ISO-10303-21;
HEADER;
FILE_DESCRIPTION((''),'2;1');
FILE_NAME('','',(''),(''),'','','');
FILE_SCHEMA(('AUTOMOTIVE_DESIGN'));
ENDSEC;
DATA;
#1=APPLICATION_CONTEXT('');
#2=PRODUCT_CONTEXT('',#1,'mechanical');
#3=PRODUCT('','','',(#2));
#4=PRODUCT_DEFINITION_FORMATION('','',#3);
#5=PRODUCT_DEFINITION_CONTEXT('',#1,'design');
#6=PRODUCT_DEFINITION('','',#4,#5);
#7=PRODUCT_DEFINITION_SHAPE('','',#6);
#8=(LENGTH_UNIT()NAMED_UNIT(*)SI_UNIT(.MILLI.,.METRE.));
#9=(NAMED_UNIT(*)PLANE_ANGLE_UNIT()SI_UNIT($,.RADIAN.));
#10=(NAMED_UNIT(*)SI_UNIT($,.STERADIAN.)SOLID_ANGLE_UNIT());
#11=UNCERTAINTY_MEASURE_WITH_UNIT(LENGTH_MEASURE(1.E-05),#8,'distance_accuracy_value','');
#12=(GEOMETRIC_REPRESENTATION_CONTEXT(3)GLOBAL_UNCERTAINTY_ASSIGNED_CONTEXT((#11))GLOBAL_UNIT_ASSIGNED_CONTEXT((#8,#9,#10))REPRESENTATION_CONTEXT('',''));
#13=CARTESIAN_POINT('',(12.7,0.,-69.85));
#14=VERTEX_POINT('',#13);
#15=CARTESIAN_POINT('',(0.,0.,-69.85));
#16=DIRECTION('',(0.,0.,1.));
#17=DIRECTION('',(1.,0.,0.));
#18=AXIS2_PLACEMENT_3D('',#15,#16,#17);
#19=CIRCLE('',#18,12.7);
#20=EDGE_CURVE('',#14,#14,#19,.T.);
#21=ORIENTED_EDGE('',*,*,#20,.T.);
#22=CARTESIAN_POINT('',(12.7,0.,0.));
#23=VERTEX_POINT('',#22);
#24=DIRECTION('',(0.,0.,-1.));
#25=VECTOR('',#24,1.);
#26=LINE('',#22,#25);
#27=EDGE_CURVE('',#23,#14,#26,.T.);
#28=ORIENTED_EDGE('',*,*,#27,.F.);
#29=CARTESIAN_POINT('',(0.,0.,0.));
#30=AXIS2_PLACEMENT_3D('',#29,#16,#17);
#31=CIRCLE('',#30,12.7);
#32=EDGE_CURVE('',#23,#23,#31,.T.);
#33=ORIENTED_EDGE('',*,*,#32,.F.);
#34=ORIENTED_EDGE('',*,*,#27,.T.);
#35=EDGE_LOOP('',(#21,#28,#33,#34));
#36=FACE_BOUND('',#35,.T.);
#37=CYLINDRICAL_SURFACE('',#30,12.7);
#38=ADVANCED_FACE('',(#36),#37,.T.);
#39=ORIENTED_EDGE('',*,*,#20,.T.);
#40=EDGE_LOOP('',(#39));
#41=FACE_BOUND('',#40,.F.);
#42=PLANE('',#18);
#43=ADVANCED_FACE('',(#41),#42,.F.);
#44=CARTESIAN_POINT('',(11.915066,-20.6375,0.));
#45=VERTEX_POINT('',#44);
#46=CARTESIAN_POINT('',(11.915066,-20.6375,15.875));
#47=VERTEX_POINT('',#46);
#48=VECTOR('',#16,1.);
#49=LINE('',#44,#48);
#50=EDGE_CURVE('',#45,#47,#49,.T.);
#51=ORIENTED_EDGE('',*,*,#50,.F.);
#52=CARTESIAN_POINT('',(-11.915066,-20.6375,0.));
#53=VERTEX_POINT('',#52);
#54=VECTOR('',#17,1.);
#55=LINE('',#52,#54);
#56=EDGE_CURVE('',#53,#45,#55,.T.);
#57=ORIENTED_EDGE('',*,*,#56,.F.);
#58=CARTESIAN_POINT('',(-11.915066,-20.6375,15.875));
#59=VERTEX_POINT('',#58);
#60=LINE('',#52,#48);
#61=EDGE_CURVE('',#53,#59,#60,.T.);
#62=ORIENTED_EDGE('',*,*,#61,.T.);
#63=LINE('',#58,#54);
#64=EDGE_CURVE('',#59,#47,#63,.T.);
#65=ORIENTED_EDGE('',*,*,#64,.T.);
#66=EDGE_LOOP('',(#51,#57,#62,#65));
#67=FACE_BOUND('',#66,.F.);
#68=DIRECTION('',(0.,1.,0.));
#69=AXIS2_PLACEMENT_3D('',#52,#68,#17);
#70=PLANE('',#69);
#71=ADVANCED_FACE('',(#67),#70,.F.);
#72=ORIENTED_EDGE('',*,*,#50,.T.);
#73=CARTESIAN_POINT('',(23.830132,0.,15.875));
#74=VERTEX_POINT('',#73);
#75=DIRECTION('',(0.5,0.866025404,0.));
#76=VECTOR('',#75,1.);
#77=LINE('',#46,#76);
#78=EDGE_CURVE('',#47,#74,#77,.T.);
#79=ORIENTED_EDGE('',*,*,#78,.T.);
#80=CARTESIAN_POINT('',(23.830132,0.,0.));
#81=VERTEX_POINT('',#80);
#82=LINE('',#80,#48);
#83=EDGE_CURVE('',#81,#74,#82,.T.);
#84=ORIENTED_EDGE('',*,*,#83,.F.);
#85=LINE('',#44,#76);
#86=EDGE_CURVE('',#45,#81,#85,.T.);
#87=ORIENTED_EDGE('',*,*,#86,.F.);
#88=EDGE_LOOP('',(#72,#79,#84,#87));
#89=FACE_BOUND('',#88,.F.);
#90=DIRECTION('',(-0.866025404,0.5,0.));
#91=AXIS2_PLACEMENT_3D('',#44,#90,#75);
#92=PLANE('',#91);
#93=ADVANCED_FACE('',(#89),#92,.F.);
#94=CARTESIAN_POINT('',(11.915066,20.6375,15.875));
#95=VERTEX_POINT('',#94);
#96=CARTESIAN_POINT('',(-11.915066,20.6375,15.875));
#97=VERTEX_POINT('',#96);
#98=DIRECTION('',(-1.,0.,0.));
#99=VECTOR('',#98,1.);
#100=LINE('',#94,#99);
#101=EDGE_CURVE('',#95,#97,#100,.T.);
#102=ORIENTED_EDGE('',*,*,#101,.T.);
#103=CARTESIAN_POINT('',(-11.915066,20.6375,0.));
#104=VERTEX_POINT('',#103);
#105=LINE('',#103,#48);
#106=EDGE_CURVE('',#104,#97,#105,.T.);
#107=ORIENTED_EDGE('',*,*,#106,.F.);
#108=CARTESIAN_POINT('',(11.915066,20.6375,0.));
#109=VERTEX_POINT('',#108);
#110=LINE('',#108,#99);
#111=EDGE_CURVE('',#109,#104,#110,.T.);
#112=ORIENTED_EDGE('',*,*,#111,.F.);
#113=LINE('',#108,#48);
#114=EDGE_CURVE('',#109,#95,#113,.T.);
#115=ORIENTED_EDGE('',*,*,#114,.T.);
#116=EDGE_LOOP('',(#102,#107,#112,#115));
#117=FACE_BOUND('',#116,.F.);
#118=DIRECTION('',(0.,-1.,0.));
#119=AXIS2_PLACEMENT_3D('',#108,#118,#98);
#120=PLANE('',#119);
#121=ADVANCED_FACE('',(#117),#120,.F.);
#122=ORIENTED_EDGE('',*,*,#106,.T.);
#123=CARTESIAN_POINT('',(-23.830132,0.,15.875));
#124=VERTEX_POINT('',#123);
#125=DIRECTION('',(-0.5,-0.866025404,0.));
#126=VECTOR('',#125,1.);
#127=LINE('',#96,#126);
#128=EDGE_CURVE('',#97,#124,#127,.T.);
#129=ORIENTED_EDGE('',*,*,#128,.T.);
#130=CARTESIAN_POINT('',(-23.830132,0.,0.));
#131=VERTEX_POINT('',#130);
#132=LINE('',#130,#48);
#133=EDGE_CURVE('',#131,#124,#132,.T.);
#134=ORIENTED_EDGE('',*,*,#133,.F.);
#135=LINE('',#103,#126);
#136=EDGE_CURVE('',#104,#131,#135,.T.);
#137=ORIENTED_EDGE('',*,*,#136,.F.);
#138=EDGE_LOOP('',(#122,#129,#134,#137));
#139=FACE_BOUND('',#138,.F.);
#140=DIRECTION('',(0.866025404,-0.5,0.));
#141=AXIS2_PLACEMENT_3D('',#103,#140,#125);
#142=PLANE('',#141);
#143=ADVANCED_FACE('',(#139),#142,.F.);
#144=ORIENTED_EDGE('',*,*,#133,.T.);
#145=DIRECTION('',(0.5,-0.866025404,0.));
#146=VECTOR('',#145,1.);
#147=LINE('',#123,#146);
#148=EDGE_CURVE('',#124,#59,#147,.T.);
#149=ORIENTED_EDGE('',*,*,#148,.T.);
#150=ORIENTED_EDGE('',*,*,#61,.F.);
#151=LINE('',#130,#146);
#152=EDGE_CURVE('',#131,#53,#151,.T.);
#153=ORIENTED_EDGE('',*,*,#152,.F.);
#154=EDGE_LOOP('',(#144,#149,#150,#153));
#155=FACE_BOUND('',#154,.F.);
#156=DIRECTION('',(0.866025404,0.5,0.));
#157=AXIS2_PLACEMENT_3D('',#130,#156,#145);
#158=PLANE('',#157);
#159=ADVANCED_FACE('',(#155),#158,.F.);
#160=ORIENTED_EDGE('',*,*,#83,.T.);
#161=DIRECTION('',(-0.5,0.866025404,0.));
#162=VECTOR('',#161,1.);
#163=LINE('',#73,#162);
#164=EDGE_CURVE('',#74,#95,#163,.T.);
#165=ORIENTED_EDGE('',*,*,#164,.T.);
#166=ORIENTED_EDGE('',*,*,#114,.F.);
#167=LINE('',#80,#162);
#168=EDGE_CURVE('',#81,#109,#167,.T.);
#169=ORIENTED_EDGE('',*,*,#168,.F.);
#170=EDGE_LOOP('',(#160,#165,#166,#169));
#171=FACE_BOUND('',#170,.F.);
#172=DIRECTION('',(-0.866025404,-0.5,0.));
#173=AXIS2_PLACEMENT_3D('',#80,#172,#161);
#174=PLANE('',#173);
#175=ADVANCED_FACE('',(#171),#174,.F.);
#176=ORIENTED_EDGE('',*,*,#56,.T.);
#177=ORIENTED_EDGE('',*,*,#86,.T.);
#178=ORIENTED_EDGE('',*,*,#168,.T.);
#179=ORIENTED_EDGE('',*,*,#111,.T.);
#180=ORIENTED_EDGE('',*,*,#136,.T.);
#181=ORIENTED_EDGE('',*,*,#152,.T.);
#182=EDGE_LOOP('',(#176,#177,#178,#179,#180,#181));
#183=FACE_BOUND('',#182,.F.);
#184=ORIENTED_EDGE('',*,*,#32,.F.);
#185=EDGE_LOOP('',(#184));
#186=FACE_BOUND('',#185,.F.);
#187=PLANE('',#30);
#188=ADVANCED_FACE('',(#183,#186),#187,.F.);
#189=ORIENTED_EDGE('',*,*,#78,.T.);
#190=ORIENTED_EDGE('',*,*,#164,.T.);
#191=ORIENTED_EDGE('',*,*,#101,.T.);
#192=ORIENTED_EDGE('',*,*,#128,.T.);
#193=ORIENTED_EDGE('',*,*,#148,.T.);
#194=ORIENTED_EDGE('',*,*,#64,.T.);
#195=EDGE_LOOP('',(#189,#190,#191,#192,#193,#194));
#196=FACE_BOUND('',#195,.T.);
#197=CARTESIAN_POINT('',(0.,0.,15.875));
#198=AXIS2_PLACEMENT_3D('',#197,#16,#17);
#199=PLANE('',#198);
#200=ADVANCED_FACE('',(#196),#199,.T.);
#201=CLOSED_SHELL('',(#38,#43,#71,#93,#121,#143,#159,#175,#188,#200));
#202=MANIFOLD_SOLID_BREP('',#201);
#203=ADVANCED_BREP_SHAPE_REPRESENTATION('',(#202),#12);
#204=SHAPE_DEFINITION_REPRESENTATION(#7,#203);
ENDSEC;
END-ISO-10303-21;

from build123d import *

# Parameters (mm, degrees)
F0_R     = 12.7
F1_DEPTH = 69.85
F3_DEPTH = 15.875


# Not quite as in the source:
# - a feature names something its author has since deleted; it is built from what else it names


with BuildPart() as f1:
    # F0 (on Top) → F1 (new body)
    with BuildSketch(Plane.XY):
        Circle(F0_R)
    extrude(amount=-F1_DEPTH)

    # F2 (on face) → F3 (join)
    with BuildSketch(Plane.XY):
        Polygon((11.9150661804, 20.6375), (-11.9150661804, 20.6375), (-23.8301323608, 0), (-11.9150661804, -20.6375), (11.9150661804, -20.6375), (23.8301323608, 0), align=None)
    extrude(amount=F3_DEPTH)


solid = f1.part
